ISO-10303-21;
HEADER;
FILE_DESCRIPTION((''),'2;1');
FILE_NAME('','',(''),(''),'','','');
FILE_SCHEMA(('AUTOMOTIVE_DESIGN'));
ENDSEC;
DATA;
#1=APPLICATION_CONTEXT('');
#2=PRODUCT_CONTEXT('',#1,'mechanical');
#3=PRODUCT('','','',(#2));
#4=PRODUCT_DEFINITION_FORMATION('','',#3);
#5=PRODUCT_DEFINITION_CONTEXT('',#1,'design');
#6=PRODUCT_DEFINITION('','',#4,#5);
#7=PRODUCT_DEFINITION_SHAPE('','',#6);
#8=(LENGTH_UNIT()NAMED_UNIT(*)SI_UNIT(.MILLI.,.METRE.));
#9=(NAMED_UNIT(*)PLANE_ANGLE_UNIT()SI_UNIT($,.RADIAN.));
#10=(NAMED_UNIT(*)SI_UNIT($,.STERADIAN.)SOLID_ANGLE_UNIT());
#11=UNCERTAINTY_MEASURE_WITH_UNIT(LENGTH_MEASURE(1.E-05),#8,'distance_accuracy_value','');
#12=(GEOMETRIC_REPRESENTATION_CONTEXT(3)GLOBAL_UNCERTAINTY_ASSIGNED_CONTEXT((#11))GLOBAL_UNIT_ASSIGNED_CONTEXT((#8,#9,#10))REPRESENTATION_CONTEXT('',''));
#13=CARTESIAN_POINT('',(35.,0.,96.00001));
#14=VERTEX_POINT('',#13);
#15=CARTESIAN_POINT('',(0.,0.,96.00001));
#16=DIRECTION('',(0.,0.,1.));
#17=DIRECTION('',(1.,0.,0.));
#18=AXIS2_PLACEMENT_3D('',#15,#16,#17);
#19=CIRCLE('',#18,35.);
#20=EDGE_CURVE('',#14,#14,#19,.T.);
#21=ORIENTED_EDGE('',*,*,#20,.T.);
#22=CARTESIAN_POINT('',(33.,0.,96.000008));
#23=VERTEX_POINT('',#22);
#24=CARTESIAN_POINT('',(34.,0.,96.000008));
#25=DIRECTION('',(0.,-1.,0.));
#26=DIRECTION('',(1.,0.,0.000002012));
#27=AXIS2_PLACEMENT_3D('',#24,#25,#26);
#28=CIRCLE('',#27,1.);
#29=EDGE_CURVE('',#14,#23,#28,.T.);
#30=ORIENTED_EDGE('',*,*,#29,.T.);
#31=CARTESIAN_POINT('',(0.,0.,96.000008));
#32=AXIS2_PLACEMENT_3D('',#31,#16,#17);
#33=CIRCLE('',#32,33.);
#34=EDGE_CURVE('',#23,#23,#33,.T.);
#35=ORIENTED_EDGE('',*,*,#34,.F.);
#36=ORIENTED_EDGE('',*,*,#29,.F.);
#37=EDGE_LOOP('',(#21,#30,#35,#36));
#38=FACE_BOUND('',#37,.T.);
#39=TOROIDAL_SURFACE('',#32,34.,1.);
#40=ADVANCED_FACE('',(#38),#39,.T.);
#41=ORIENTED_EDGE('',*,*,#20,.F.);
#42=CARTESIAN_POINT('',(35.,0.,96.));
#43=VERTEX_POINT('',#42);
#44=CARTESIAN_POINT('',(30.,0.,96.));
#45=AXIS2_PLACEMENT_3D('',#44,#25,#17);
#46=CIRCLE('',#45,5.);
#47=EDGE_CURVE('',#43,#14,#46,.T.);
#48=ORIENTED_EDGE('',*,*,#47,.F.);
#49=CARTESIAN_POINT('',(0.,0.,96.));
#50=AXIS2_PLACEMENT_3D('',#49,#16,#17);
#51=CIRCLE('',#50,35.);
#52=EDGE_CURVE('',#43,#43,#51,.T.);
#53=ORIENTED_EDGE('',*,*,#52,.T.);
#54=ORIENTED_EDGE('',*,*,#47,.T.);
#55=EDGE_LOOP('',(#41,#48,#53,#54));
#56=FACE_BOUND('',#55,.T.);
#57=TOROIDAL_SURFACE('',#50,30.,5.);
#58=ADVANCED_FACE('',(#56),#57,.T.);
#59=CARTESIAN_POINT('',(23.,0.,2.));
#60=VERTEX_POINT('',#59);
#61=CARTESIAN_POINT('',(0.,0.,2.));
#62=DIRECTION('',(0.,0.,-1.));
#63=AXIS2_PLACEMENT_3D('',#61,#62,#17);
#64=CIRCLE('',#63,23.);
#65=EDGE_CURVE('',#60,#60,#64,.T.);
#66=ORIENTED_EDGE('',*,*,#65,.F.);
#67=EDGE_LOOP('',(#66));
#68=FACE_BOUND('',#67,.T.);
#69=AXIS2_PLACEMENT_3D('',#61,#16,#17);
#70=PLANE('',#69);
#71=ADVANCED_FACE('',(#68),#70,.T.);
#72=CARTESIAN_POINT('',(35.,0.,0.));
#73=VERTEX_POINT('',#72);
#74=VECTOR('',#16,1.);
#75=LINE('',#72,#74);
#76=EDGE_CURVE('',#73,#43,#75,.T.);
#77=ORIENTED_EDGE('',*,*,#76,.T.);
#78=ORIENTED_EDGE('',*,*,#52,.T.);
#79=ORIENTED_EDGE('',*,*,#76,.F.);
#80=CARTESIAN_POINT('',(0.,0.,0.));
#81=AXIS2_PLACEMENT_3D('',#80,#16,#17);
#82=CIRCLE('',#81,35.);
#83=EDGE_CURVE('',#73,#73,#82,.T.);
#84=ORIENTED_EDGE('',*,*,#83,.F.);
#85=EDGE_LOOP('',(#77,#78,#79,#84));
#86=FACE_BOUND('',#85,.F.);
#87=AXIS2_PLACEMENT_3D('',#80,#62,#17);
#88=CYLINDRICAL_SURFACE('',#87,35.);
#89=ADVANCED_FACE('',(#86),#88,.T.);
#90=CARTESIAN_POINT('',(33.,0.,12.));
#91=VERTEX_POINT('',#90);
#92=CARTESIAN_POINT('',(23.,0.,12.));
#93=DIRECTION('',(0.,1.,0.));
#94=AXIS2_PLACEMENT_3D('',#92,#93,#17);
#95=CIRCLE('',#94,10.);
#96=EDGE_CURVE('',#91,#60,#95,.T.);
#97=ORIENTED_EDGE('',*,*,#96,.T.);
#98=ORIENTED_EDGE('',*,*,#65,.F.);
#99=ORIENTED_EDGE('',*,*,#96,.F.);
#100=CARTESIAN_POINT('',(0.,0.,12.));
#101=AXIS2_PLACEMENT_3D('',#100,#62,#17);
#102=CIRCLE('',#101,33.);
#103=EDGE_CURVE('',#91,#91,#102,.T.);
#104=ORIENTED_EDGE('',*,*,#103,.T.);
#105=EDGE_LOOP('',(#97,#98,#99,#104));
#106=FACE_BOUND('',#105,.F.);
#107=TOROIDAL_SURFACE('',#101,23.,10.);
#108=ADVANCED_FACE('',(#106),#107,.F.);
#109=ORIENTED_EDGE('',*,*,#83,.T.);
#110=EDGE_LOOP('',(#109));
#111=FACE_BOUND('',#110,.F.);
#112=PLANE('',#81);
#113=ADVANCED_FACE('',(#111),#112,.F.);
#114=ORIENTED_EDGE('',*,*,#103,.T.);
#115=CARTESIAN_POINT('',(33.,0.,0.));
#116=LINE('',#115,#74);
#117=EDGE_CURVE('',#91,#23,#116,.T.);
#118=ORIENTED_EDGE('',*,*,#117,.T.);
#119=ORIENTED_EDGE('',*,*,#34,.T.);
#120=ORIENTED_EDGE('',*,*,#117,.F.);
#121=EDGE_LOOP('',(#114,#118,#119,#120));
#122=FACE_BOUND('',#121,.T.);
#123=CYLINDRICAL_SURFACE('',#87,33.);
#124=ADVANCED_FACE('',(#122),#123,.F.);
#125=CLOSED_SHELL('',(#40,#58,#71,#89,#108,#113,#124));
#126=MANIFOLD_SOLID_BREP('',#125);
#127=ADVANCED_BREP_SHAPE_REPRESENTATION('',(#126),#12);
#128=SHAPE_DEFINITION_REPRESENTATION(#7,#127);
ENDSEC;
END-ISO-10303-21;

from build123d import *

# Parameters (mm, degrees)
F0_R     = 35
F1_DEPTH = 100
F2_T     = -2
F5_R     = 10


# Not quite as in the source:
# - a fillet or chamfer that OpenCascade refuses, or shapes differently, is made with other operations: its cross-section is extruded or revolved along the edge and cut away or added


with BuildPart() as f1:
    # F0 (on Top) → F1 (new body)
    with BuildSketch(Plane.XY):
        Circle(F0_R)
    extrude(amount=F1_DEPTH)

    # F2
    f2_openings = [f1.faces().sort_by_distance(p)[0] for p in [
        (0, 0, 100),
    ]]
    offset(amount=F2_T, openings=f2_openings)

    # F3: fillet of radius 5 on 1 edges, made by hand

    # F3_s1 → F3_t2 (revolve, cut)
    with BuildSketch(Plane.XZ):
        with BuildLine():
            ThreePointArc((35, 96), (34.472135955, 98.2360679775), (33, 100))
            Line((33, 100), (35, 100))
            Line((35, 100), (35, 96))
        make_face()
    revolve(axis=Axis((0, 0, 100), (0, 0, 1)), mode=Mode.SUBTRACT)

    # F4: fillet of radius 1 on 1 edges, made by hand

    # F4_s1 → F4_t2 (revolve, cut)
    with BuildSketch(Plane.XZ):
        with BuildLine():
            ThreePointArc((35, 96.0000100581), (33.9999989942, 97.0000080465), (33, 96.0000080465))
            Line((33, 96.0000080465), (33, 100))
            ThreePointArc((33, 100), (34.4721337059, 98.2360724756), (35, 96.0000100581))
        make_face()
    revolve(axis=Axis((0, 0, 100), (0, 0, 1)), mode=Mode.SUBTRACT)

    # F5
    f5_edges = [f1.edges().sort_by_distance(p)[0] for p in [
        (-33, 0, 2),
    ]]
    fillet(f5_edges, radius=F5_R)


solid = f1.part
